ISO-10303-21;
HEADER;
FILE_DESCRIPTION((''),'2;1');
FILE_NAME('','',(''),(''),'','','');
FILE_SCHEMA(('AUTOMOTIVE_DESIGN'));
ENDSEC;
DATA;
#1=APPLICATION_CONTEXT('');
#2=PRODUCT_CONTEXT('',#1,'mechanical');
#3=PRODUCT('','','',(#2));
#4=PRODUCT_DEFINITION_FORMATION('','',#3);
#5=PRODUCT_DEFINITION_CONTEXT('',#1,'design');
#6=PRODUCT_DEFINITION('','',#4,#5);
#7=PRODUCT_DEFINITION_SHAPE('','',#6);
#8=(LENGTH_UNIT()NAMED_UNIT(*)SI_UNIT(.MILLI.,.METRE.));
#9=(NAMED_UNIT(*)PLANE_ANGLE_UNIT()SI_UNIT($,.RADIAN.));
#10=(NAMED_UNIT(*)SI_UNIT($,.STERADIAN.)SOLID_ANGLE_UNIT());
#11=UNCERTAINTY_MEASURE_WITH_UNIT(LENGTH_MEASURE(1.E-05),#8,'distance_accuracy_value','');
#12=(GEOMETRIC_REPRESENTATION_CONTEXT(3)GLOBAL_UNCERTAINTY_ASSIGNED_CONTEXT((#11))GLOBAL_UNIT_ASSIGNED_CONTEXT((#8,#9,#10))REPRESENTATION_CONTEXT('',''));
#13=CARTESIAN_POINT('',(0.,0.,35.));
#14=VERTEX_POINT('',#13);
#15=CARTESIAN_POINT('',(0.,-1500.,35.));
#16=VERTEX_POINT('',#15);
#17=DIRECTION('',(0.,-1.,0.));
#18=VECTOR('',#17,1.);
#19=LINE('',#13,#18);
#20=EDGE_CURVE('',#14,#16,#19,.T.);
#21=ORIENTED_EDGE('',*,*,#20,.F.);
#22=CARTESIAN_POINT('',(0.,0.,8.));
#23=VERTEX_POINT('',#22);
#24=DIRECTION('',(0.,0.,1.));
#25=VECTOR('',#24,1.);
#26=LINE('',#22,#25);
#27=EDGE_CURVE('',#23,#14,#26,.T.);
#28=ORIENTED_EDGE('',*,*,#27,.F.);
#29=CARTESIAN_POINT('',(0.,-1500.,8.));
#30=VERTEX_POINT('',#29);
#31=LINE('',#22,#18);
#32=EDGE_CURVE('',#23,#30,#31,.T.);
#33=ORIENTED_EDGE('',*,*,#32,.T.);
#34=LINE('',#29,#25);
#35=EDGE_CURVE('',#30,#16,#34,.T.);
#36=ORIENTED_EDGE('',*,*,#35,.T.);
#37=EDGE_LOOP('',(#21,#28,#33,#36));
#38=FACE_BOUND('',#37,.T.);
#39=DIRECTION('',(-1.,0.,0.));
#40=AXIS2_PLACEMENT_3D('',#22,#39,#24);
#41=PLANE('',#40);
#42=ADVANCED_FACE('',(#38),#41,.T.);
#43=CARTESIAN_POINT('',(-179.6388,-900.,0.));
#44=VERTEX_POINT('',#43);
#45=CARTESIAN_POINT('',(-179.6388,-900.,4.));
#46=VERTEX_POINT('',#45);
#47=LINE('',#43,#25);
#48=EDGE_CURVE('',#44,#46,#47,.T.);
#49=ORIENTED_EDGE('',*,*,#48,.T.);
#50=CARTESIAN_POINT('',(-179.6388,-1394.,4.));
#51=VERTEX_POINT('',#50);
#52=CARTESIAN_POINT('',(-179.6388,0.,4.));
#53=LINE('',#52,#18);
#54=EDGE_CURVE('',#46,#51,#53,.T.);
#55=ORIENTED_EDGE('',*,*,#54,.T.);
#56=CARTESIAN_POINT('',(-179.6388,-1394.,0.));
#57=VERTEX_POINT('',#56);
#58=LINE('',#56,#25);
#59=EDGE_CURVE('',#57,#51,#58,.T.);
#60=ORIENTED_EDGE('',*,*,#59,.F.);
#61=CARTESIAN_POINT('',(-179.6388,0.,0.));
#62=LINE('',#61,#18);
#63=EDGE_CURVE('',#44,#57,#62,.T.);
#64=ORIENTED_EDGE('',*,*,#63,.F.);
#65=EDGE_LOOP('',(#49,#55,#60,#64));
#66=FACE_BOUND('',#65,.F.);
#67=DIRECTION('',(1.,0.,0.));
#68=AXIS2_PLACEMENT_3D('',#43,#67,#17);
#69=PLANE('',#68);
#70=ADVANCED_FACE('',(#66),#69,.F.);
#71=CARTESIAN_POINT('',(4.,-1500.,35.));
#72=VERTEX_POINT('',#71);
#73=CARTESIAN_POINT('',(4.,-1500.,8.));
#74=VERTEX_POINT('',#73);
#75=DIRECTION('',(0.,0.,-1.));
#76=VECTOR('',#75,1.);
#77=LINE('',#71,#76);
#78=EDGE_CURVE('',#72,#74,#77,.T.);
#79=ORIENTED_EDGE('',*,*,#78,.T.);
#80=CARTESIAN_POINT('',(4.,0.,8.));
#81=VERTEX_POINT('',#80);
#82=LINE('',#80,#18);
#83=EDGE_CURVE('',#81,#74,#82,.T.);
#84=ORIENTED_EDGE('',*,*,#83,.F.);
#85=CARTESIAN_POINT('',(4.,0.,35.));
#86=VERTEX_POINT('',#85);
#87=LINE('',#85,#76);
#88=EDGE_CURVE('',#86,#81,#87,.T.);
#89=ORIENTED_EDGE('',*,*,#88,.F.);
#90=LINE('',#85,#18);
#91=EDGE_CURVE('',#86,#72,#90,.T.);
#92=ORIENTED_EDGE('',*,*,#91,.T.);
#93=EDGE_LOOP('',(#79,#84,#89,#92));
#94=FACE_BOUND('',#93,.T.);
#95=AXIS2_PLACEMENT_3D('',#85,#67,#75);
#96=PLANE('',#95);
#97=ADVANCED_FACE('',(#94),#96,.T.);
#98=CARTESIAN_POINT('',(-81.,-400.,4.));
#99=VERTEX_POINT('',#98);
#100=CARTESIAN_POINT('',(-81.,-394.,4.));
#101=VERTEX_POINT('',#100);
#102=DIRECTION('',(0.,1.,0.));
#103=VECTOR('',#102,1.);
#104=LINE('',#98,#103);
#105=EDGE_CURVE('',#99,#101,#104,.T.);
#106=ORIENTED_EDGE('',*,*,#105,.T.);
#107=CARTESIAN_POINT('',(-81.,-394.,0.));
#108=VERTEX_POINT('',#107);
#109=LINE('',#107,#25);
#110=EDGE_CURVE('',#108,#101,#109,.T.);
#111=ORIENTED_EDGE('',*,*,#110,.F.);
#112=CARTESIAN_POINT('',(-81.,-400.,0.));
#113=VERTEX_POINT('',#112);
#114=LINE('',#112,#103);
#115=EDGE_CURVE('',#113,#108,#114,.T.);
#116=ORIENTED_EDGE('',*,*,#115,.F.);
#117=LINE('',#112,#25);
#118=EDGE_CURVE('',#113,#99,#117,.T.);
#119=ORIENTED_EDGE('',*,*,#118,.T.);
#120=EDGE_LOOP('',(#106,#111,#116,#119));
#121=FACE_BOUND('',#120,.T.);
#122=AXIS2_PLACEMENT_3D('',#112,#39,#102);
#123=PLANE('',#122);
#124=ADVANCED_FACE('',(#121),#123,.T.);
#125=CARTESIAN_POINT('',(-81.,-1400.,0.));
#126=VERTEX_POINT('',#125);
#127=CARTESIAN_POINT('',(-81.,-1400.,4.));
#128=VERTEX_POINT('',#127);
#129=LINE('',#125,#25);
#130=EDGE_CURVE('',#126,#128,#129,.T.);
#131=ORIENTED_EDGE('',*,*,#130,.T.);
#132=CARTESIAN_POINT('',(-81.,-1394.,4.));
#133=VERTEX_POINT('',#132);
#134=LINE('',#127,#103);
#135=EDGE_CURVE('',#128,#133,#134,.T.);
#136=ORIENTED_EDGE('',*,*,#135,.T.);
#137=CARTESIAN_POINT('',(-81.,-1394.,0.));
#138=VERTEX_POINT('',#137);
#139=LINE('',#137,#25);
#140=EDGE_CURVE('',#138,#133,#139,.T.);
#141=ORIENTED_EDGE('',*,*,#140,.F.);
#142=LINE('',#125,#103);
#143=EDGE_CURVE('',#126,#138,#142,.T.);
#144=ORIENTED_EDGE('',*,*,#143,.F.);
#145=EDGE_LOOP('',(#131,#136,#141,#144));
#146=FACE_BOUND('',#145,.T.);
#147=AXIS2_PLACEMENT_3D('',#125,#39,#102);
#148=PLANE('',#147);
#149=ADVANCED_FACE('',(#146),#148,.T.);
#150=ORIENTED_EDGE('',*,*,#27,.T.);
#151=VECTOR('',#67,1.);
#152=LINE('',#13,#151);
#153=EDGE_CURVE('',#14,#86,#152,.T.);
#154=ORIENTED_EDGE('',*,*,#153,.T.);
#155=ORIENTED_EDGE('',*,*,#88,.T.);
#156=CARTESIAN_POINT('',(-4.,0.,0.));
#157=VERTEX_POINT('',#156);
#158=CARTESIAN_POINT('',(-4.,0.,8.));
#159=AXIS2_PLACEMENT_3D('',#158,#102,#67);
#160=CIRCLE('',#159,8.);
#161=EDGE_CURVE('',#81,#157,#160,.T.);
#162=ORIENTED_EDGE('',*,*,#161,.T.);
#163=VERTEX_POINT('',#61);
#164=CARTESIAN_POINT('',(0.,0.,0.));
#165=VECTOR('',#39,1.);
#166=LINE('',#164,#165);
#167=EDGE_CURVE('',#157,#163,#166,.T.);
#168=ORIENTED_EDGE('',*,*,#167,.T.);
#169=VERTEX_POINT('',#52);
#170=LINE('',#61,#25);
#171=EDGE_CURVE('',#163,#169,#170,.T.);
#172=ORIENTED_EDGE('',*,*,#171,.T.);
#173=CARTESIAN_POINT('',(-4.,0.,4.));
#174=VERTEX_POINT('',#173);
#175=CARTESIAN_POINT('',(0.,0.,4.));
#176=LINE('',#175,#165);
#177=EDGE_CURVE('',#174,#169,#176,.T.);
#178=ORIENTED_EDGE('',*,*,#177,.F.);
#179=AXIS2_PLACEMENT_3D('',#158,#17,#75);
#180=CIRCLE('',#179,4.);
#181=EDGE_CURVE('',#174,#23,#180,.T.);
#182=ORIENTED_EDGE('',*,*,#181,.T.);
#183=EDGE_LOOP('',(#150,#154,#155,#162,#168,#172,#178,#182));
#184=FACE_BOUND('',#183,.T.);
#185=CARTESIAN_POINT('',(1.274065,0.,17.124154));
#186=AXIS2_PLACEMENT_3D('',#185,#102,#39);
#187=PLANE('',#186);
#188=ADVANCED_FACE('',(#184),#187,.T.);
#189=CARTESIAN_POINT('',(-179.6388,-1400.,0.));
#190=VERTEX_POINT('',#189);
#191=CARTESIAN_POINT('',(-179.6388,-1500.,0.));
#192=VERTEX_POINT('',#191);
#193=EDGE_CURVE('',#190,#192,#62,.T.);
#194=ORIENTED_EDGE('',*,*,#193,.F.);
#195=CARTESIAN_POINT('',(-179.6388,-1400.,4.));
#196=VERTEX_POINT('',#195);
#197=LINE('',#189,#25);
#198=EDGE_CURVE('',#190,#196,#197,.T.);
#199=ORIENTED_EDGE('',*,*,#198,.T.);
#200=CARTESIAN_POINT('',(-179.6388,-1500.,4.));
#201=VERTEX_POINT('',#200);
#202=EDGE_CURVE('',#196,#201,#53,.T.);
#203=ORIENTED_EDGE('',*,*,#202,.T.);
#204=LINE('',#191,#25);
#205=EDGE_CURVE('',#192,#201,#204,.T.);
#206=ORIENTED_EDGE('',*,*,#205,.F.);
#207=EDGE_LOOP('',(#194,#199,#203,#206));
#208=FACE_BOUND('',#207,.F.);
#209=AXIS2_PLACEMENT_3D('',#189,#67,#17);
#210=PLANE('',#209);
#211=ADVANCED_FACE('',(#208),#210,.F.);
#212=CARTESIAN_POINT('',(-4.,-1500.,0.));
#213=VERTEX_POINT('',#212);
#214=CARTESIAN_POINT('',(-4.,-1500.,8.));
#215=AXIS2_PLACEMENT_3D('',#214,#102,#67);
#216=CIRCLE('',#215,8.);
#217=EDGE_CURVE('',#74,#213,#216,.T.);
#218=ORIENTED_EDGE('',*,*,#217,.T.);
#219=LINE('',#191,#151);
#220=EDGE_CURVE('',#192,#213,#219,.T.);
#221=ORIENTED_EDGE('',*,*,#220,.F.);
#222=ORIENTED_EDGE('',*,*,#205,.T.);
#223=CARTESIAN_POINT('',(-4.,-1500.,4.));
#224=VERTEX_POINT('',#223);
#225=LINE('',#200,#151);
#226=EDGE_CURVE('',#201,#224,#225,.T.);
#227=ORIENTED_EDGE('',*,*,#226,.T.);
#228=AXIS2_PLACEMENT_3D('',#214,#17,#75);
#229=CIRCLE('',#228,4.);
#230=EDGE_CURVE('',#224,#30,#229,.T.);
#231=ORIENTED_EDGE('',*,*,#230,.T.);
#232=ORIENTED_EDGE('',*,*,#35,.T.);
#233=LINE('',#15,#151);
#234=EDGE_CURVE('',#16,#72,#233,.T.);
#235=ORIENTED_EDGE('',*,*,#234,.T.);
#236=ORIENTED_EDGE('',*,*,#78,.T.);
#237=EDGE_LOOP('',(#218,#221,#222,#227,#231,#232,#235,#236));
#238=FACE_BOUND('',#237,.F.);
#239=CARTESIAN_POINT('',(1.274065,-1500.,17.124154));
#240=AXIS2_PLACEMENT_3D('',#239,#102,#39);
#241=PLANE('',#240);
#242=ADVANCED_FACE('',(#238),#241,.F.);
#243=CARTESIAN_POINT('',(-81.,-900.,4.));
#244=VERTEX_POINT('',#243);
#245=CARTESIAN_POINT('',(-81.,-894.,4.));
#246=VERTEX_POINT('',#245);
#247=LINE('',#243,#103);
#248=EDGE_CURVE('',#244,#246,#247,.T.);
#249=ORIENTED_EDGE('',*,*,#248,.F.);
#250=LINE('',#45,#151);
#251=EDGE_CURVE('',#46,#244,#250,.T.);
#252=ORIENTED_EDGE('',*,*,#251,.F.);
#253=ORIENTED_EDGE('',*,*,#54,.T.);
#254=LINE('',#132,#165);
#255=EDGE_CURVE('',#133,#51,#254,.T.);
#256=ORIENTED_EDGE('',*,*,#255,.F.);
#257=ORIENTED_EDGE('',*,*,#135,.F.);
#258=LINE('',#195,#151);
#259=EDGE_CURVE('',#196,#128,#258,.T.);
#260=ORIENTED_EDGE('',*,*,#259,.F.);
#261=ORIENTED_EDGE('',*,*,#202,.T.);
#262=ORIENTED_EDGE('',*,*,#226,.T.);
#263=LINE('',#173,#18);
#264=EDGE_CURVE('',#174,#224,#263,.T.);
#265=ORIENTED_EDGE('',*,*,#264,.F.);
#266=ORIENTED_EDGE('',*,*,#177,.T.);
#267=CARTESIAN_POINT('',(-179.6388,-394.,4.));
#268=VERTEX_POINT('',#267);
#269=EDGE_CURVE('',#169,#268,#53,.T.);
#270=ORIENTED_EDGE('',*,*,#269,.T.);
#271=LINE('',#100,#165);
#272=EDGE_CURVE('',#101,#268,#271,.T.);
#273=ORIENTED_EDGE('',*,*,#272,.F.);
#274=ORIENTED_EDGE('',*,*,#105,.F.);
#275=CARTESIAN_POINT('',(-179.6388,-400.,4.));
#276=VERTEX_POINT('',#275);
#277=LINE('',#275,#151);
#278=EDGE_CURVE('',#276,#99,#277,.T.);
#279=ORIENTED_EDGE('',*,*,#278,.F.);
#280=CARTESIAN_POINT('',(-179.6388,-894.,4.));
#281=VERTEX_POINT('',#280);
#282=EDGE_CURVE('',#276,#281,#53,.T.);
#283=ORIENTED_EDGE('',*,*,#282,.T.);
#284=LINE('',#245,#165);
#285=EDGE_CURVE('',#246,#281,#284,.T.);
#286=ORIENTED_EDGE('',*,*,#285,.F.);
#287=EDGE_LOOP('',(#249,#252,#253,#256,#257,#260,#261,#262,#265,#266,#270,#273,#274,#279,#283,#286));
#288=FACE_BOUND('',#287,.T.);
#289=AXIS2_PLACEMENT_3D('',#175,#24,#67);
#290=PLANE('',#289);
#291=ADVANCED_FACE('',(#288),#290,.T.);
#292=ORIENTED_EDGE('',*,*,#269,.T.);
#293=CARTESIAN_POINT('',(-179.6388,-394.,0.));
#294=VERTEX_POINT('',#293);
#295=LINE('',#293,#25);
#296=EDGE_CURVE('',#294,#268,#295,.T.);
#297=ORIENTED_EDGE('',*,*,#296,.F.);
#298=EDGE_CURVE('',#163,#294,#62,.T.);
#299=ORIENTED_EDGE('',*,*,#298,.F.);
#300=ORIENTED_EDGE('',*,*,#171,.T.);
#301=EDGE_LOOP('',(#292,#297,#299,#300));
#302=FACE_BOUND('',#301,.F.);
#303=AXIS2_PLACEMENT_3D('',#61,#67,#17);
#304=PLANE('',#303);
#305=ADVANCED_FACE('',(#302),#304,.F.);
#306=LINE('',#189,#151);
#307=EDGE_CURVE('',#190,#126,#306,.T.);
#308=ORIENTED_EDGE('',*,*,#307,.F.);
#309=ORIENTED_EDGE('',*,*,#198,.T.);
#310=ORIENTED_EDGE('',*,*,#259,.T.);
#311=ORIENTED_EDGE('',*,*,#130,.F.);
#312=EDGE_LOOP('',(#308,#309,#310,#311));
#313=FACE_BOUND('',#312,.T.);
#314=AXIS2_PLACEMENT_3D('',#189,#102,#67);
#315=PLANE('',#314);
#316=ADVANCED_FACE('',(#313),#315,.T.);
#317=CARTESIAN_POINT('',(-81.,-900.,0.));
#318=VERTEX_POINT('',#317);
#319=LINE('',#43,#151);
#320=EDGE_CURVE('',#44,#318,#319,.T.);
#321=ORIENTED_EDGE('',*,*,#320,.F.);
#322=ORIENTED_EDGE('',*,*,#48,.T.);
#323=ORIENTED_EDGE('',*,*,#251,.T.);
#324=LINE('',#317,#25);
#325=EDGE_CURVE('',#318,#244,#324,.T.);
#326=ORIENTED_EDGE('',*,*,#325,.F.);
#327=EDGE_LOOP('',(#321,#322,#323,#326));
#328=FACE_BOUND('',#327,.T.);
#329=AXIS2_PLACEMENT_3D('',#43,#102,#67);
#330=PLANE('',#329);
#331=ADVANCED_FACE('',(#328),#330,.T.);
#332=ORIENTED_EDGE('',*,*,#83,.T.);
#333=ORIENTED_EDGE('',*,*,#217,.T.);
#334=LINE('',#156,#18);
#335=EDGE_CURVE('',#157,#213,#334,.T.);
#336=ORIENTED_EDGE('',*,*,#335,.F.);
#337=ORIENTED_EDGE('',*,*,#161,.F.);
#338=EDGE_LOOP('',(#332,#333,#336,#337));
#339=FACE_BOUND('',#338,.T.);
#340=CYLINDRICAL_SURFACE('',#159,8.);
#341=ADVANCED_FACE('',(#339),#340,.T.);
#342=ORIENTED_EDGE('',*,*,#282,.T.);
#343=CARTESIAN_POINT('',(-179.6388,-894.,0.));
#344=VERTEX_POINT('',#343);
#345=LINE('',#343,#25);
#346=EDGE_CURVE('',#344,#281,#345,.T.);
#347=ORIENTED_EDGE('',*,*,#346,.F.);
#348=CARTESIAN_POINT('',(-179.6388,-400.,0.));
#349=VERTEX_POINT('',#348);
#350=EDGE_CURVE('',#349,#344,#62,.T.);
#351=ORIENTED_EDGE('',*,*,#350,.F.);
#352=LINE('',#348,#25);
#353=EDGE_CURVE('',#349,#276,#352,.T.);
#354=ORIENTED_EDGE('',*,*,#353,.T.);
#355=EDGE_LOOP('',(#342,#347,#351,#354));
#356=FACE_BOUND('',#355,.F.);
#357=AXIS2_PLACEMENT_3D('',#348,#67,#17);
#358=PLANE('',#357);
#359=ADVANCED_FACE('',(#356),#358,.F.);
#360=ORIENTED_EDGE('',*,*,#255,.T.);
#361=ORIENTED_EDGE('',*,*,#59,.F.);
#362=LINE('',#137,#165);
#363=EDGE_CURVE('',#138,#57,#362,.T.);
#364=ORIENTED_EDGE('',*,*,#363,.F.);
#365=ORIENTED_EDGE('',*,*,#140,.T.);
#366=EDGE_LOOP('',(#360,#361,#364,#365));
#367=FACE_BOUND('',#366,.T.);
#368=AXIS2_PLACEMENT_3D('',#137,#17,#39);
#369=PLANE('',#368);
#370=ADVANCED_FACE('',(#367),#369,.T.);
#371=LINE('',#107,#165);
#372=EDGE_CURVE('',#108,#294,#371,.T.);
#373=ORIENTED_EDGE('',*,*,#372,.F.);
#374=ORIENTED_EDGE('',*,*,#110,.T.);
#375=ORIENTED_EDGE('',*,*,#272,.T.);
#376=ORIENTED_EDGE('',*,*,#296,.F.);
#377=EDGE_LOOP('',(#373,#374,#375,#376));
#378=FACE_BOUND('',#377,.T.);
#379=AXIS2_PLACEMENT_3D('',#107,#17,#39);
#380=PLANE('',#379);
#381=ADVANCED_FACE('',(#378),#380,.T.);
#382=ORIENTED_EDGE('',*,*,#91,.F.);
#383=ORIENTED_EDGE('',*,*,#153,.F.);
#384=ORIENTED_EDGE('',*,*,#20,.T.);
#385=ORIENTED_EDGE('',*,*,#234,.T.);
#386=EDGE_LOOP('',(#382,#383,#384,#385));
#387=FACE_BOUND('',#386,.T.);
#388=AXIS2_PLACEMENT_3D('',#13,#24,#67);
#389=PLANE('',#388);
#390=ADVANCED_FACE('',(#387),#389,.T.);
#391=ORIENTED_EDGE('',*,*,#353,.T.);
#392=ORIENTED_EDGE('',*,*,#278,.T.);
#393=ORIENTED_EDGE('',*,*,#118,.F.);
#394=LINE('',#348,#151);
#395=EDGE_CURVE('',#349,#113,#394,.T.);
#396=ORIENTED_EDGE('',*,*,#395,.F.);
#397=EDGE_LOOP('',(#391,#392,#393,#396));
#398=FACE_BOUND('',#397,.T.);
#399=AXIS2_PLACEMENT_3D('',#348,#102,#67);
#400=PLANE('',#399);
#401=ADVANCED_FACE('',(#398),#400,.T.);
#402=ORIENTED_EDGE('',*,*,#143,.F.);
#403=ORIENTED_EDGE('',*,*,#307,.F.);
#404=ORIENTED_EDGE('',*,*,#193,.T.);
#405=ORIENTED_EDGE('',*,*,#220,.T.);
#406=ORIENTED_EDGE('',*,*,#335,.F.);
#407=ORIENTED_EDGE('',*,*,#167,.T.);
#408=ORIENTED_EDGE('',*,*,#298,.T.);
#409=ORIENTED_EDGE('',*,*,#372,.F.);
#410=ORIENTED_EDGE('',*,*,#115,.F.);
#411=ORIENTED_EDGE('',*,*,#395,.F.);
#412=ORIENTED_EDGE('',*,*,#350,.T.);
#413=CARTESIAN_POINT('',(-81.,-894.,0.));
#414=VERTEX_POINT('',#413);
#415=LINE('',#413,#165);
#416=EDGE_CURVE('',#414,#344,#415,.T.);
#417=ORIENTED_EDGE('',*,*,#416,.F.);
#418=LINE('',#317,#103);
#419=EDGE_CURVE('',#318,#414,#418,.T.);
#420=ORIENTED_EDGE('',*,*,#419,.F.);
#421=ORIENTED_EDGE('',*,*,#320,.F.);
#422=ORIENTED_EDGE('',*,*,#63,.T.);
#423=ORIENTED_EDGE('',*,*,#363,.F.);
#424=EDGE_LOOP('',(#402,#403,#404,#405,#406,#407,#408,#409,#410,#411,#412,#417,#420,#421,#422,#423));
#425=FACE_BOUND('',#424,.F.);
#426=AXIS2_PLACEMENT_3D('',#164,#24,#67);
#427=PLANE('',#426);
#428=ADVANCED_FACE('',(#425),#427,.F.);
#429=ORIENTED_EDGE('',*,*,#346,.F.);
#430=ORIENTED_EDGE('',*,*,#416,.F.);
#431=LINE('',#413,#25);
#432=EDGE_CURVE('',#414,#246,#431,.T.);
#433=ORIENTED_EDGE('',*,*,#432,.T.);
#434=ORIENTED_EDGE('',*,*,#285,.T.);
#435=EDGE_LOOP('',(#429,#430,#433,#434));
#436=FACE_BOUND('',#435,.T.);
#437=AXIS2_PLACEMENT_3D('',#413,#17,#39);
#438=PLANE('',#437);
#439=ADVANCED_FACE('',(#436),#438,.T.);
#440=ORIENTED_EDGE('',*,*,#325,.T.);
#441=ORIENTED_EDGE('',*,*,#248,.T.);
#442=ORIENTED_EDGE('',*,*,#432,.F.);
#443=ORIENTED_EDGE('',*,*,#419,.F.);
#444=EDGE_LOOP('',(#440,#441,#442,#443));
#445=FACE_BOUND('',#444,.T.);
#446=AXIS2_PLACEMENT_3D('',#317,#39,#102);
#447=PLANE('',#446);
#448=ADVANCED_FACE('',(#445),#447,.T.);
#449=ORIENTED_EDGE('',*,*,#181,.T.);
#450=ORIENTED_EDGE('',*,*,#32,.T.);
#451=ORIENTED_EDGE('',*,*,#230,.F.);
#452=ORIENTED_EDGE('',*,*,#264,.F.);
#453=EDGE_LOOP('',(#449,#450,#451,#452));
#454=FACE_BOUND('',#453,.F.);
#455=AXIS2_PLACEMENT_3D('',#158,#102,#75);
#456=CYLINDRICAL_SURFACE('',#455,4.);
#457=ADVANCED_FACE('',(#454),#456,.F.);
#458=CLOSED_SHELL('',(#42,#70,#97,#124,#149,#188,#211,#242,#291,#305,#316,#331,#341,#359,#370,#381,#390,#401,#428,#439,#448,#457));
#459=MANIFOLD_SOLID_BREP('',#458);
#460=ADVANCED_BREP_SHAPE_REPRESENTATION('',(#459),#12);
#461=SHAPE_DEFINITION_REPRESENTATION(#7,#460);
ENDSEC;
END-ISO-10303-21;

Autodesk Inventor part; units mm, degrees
ref_plane "YZ Plane" through (0, 0, 0) normal (1, 0, 0) x (0, 1, 0)
ref_plane "XZ Plane" through (0, 0, 0) normal (0, 1, 0) x (-1, 0, 0)
ref_plane "XY Plane" through (0, 0, 0) normal (0, 0, 1) x (1, 0, 0)
sketch "Sketch1" plane through (0, 0, 0) normal (0, 0, 1) x (1, 0, 0)
  line L0 (0, 0) -> (-179.6388, 0)
  line L1 (-179.6388, 0) -> (-179.6388, -1500)
  line L2 (-179.6388, -1500) -> (0, -1500)
  line L3 (0, -1500) -> (0, 0)
  line L4 (-179.6388, -1400) -> (-81, -1400)
  line L5 (-81, -1400) -> (-81, -1394)
  line L6 (-81, -1394) -> (-179.6388, -1394)
  line L7 (-179.6388, -1394) -> (-179.6388, -1400)
  line L8 (-179.6388, -900) -> (-81, -900)
  line L9 (-81, -900) -> (-81, -894)
  line L10 (-81, -894) -> (-179.6388, -894)
  line L11 (-179.6388, -894) -> (-179.6388, -900)
  line L12 (-179.6388, -400) -> (-81, -400)
  line L13 (-81, -400) -> (-81, -394)
  line L14 (-81, -394) -> (-179.6388, -394)
  line L15 (-179.6388, -394) -> (-179.6388, -400)
  point P0 (-179.6388, -394)
  point P1 (-179.6388, -400)
  point P2 (-179.6388, -1394)
  dimension "d0" = 1500
  dimension "d1" = 179.6388
  dimension "d2" = 6
  dimension "d4" = 100
  dimension "d7" = 500
  dimension "d23" = 81
extrude "Plate1" add sketch "Sketch1" along normal blind 4 contours L3 L2 L1 L4 L5 L6 L8 L9 L10 L12 L13 L14 L0
sketch "Sketch2" plane through (4, 0, 0) normal (-1, 0, 0) x (0, -1, 0)
  line L0 (1500, 0) -> (0, 0)
  line L1 (0, 0) -> (0, 35)
  line L2 (0, 35) -> (1500, 35)
  line L3 (1500, 35) -> (1500, 0)
edge flange "Flange1" height 35 angle 90 thickness 4 bend radius 4 thickness toward (-1, 0, 0) relief tear relief width 4 relief depth 2 edges at (0, -750, 4) wall of the first edge with corners at (4, -1500, 0) (4, 0, 0) (4, 0, 35) (4, -1500, 35)
bend "Bend1"
corner "Corner1"
equation "\"d1\" = Stringer2_deep"
equation "\"d12\" = Thickness"
equation "\"d13\" = BendReliefWidth"
equation "\"d14\" = BendReliefDepth"
equation "\"d15\" = MinimumRemnant"
equation "\"d16\" = TransitionRadius"
equation "\"d19\" = BendRadius"
equation "\"d20\" = CornerReliefSize"
equation "\"d21\" = GapSize"
equation "\"d22\" = JacobiRadiusSize"
equation "\"BendRadius\" = Thickness"
equation "\"BendReliefWidth\" = Thickness"
equation "\"BendReliefDepth\" = 0.5 * Thickness"
equation "\"CornerReliefSize\" = 4 * Thickness"
equation "\"MinimumRemnant\" = 2 * Thickness"
equation "\"TransitionRadius\" = BendRadius"
equation "\"JacobiRadiusSize\" = BendRadius"
equation "\"GapSize\" = Thickness"
equation "\"Stringer2_deep\" = 179.638781"
equation "\"Thickness\" = 4"
properties part number "stringer 1.2" material "Steel"
